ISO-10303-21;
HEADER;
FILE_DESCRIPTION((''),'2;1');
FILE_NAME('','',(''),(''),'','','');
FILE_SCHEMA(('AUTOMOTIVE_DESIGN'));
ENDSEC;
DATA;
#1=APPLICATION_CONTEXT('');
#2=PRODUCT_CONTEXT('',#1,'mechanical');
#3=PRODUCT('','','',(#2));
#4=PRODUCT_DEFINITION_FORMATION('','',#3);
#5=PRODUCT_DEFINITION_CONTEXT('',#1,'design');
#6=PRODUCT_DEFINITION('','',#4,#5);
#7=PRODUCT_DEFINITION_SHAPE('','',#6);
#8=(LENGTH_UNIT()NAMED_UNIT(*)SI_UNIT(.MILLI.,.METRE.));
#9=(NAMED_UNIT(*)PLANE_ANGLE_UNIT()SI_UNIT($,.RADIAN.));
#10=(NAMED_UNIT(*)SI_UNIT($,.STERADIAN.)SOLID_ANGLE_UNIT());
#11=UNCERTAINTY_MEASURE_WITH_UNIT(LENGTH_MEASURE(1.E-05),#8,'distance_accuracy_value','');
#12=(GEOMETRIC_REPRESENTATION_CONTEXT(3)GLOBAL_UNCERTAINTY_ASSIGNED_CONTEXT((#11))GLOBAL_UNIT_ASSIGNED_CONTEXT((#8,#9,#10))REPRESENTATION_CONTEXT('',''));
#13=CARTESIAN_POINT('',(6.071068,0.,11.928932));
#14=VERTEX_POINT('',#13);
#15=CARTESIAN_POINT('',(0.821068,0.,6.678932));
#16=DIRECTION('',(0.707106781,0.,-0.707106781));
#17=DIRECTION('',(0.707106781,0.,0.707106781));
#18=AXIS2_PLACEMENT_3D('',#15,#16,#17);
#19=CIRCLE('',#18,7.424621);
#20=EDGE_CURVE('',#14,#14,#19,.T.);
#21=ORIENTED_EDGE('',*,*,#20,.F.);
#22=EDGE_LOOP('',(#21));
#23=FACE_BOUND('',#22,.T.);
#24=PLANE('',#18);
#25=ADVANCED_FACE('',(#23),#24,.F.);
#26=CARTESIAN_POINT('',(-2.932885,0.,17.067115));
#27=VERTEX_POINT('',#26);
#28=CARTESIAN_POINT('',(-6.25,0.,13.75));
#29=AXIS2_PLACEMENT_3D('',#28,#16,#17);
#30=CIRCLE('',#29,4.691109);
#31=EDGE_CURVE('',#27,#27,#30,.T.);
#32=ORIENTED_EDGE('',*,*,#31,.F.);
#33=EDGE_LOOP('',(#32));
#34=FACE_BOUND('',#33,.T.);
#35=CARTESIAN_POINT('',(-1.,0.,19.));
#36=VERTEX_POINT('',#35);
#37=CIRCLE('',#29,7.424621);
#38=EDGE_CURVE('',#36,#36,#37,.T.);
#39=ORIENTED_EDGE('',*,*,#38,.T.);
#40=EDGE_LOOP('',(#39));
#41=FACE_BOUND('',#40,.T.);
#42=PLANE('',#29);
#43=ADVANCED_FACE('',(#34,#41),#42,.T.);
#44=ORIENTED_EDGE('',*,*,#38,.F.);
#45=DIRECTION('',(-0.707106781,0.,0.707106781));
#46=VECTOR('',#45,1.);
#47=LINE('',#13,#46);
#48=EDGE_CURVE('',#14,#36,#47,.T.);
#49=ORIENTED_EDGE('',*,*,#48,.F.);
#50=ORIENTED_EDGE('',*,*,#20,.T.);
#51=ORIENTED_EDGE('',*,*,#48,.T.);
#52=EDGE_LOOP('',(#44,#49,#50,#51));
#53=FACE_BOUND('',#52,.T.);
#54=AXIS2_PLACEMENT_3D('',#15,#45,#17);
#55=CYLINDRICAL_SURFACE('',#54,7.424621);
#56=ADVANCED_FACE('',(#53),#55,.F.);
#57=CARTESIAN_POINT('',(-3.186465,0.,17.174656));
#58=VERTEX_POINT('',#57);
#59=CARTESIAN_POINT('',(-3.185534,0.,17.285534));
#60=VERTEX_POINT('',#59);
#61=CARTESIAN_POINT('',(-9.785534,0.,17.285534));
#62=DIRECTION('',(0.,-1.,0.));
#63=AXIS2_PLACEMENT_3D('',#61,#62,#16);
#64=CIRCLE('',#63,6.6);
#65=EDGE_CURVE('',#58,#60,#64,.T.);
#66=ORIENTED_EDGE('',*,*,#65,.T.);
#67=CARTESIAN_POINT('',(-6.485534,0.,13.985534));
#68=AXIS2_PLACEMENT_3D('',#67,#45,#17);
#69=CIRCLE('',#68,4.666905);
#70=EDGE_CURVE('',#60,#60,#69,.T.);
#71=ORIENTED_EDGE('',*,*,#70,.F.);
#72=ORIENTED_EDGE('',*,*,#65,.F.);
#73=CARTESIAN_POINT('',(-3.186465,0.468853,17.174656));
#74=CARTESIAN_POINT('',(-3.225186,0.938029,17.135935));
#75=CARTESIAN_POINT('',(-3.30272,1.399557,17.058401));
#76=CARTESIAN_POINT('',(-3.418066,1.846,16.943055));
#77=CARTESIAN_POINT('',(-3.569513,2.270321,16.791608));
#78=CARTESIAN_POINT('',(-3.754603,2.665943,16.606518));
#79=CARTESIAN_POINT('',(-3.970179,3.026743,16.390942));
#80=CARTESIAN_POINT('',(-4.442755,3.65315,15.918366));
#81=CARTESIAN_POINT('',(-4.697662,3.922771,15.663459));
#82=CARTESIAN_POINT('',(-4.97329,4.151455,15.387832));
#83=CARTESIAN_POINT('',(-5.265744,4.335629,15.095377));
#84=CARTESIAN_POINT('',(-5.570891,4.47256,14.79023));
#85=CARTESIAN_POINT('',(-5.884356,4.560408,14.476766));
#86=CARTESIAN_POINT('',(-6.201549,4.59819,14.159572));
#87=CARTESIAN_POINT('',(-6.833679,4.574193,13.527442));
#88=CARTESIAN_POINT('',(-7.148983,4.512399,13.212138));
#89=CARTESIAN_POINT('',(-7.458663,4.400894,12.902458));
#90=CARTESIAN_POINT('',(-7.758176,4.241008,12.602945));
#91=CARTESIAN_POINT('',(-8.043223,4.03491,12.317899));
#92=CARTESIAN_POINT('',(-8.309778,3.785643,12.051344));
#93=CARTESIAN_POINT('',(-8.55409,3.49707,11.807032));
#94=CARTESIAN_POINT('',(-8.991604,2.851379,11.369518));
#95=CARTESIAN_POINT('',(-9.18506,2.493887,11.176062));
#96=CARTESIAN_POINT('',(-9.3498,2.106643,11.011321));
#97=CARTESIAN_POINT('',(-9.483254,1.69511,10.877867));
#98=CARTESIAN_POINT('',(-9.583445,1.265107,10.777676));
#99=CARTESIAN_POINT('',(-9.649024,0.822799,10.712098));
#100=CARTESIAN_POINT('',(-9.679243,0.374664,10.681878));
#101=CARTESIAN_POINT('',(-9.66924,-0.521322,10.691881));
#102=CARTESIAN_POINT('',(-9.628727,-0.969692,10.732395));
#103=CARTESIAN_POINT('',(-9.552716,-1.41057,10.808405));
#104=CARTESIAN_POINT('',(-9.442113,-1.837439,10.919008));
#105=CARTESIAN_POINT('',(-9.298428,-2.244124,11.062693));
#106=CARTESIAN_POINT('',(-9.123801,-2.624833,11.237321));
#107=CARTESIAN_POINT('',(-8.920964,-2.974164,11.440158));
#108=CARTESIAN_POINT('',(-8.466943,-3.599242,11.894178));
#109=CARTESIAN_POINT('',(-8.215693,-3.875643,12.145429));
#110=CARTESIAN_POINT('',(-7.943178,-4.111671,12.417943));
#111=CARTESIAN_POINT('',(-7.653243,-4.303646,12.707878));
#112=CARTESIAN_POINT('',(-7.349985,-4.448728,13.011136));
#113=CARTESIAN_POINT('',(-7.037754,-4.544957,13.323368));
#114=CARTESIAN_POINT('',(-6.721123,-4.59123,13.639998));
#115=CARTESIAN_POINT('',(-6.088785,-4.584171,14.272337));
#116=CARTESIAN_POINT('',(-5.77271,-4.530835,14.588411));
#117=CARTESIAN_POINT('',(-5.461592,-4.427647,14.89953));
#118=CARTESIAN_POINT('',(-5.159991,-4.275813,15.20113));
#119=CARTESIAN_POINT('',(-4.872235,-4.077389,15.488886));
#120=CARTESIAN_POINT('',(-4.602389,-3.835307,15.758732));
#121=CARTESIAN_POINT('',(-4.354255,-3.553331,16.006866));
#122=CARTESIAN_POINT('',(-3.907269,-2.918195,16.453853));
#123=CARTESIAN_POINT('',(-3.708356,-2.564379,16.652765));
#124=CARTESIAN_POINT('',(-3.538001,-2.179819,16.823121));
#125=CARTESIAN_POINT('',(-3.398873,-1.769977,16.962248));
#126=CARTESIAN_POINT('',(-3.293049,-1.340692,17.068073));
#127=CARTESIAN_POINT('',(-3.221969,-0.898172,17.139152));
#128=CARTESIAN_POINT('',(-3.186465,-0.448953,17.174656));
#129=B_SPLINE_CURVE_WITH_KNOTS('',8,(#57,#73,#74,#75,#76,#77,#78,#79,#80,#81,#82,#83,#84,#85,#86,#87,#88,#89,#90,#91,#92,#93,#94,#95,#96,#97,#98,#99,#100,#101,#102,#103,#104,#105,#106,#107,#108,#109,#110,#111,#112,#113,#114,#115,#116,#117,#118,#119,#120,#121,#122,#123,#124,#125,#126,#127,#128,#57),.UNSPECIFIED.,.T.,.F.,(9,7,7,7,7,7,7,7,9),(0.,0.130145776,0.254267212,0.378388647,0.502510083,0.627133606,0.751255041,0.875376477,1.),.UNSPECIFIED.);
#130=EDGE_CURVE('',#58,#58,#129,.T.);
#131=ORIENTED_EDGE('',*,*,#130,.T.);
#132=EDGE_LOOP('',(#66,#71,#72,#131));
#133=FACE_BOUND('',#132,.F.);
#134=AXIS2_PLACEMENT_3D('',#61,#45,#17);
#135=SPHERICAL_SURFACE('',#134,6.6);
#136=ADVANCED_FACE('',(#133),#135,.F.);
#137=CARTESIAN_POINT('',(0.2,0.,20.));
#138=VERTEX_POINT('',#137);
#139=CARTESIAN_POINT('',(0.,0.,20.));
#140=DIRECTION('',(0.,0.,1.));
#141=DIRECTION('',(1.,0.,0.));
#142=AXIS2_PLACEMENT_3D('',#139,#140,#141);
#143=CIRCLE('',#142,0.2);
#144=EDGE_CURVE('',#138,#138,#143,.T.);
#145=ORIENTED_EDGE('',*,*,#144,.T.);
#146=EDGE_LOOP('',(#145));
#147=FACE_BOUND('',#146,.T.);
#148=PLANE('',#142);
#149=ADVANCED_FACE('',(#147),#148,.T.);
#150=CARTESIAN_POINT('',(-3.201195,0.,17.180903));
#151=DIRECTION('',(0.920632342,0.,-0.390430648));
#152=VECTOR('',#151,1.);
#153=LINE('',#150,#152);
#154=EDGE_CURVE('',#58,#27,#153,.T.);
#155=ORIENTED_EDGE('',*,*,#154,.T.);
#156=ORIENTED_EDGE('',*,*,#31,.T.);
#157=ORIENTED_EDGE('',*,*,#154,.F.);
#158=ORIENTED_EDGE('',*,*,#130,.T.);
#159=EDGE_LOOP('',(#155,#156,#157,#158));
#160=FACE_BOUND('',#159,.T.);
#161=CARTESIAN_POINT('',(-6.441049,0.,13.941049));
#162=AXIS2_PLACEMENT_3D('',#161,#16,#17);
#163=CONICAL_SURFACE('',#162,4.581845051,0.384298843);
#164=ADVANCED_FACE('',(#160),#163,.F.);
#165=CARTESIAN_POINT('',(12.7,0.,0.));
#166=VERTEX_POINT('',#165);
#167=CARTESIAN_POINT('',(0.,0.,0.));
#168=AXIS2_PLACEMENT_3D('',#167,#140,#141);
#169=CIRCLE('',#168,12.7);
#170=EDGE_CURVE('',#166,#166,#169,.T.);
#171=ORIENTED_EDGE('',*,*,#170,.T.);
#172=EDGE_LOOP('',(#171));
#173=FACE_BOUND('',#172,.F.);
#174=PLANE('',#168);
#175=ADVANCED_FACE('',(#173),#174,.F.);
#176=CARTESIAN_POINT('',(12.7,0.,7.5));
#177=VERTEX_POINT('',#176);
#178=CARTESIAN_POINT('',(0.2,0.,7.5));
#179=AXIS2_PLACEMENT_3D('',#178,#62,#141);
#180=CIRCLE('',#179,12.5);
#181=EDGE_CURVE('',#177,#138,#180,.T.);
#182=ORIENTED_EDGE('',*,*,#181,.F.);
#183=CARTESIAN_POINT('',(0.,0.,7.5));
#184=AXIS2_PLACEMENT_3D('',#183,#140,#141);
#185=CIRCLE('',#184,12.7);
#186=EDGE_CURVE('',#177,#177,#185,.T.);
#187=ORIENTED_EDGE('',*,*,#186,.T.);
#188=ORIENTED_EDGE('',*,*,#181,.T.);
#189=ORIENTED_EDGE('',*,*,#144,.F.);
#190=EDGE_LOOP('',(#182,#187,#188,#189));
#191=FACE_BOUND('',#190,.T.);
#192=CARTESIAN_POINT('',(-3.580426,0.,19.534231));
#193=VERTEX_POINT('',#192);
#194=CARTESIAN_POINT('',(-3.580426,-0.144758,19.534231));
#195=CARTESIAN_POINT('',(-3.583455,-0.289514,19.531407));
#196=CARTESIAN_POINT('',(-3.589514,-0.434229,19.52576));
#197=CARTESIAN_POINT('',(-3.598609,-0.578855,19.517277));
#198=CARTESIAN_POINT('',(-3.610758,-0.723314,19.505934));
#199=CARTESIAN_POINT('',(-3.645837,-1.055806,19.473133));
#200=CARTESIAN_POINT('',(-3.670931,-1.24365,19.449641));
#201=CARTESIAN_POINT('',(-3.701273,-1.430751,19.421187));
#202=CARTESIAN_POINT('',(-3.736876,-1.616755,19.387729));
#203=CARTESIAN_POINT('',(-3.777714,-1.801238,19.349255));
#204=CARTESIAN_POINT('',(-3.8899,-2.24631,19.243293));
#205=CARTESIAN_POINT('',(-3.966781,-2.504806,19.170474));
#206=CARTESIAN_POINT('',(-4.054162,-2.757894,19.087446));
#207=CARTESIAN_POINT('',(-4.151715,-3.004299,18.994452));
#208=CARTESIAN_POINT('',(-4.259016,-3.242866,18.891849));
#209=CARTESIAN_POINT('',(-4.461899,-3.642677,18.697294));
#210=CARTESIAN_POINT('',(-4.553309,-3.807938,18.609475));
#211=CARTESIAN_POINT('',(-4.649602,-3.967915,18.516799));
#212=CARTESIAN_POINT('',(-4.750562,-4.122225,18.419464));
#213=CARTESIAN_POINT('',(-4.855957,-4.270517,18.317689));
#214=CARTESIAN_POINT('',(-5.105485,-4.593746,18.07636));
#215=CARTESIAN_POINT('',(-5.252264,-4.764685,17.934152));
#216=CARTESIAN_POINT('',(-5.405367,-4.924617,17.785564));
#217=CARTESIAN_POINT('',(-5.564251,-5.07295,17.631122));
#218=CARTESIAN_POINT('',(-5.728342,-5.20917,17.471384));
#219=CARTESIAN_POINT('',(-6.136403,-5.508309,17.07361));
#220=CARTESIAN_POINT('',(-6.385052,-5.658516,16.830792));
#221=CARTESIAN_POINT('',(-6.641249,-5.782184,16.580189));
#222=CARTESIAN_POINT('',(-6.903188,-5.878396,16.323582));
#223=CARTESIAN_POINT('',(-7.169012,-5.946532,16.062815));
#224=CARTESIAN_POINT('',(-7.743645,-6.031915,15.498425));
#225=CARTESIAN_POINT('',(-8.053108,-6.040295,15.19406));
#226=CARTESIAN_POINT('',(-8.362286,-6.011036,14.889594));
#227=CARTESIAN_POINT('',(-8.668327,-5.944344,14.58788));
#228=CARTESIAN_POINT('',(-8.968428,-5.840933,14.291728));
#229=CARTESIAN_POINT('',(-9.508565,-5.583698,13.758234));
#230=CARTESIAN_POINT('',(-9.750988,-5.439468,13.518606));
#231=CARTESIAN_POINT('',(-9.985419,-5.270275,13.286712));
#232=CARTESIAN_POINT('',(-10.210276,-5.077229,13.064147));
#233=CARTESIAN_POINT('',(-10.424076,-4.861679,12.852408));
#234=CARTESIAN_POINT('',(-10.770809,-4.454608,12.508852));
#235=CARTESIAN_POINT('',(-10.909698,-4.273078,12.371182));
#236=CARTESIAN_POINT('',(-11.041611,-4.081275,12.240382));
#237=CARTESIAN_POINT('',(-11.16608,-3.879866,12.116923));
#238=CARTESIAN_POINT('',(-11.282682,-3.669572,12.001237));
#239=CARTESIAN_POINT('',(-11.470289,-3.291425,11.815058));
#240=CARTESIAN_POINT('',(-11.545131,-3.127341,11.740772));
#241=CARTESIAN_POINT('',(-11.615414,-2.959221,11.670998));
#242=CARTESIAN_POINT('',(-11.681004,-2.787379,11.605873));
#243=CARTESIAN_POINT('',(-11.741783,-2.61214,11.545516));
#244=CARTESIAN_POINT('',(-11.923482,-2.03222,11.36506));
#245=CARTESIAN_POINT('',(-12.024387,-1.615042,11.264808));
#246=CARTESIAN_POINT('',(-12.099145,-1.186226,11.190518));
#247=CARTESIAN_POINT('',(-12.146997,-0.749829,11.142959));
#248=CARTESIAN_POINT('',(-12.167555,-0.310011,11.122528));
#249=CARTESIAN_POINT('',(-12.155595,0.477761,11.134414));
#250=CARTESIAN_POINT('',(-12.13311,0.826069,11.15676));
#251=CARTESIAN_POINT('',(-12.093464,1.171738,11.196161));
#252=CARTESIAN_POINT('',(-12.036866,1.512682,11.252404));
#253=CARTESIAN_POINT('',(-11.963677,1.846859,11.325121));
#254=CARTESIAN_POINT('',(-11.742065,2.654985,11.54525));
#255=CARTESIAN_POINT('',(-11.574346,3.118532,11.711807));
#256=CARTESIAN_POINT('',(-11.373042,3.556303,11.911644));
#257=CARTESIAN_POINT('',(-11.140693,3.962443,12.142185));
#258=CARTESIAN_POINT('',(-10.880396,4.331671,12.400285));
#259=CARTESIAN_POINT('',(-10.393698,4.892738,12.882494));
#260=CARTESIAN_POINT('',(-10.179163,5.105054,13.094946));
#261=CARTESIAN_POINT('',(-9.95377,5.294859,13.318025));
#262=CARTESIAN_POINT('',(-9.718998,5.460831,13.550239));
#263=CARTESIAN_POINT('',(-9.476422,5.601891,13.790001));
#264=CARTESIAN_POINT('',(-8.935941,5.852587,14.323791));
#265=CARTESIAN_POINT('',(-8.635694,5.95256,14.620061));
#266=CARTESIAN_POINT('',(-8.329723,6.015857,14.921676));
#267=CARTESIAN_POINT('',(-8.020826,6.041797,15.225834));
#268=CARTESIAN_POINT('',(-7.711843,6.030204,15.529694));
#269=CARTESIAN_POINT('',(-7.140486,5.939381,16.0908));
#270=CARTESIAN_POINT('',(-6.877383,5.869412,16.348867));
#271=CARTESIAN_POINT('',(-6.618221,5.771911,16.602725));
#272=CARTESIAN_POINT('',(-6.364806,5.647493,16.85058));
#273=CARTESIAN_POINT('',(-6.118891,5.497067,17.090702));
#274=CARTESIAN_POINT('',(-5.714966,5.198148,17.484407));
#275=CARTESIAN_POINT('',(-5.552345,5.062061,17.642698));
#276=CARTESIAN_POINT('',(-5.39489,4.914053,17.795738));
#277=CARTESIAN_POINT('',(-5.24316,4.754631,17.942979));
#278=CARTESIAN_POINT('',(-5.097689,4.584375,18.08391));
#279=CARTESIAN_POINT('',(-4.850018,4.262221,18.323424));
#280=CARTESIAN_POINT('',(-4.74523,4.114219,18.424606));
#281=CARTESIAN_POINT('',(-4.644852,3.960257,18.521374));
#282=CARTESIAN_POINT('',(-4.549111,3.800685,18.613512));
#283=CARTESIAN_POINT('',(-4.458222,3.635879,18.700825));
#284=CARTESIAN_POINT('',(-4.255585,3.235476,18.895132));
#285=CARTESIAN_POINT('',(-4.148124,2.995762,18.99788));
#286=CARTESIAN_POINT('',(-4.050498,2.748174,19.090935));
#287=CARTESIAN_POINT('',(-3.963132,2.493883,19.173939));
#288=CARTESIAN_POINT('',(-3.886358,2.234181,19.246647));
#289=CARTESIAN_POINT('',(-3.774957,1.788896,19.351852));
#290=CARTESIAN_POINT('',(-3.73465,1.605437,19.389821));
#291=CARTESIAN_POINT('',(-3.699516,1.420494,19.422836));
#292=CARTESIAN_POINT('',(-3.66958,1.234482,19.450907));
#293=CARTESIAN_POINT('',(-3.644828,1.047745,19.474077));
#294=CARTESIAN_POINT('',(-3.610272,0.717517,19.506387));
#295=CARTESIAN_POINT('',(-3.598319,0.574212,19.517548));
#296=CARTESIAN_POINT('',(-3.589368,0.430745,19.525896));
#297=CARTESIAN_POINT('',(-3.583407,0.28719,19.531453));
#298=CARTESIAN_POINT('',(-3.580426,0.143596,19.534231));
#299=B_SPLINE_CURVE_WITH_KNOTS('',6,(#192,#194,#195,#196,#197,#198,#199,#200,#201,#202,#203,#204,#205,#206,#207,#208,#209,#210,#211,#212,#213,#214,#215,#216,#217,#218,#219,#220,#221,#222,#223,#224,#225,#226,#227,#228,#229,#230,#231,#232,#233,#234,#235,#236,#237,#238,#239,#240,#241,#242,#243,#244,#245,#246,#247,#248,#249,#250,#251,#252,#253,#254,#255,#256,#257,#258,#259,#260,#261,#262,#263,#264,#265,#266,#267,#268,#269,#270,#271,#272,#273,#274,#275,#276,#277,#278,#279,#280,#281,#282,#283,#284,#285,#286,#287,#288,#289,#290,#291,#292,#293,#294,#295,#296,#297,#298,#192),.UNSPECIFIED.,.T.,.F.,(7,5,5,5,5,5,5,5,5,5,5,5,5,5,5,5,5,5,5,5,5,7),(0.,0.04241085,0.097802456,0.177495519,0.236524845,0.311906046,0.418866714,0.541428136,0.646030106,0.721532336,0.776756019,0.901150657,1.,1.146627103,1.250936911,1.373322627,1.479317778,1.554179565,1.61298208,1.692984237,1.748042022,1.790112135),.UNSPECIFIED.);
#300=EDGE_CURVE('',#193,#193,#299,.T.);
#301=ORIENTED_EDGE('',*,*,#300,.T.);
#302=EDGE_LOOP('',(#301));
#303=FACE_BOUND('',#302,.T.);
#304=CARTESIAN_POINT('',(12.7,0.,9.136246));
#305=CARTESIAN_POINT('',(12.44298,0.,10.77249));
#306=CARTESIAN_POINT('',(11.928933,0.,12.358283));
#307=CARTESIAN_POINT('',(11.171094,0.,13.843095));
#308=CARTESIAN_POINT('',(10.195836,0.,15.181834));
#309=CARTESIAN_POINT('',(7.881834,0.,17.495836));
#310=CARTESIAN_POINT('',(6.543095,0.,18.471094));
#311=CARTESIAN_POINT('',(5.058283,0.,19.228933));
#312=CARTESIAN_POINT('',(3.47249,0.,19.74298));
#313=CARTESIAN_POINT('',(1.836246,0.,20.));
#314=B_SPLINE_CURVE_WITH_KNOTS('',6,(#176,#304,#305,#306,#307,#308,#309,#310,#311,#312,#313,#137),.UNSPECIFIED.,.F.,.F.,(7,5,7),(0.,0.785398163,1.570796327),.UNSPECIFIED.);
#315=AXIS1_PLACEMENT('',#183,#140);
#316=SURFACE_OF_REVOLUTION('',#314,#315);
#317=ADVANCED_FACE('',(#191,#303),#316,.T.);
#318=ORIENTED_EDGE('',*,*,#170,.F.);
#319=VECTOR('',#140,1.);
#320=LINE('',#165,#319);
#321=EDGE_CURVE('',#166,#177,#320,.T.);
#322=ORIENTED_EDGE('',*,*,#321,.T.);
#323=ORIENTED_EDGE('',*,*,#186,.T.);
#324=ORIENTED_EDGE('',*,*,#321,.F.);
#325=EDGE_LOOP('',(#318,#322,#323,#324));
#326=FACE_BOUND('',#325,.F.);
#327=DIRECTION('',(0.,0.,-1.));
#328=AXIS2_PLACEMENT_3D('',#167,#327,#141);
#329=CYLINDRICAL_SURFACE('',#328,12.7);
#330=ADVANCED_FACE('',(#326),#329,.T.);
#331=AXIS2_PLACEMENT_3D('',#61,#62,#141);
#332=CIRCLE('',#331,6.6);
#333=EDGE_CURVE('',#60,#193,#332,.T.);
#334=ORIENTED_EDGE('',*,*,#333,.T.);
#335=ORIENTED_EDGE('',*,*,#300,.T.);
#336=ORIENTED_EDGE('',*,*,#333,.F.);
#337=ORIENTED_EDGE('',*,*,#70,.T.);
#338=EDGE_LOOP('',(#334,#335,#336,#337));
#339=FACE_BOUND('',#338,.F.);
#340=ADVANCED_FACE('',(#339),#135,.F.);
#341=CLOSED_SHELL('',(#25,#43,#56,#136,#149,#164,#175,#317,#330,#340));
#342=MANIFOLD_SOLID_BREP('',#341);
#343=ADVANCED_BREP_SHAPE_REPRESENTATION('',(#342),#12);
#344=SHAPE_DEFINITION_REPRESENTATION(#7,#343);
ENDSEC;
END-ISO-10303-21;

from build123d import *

# Parameters (mm, degrees)
F0_R     = 12.7
F1_DEPTH = 20
F2_R     = 12.5


# Not quite as in the source:
# - a fillet or chamfer that OpenCascade refuses, or shapes differently, is made with other operations: its cross-section is extruded or revolved along the edge and cut away or added


with BuildPart() as f1:
    # F0 (on Top) → F1 (new body)
    with BuildSketch(Plane.XY):
        Circle(F0_R)
    extrude(amount=F1_DEPTH)

    # F2
    f2_edges = [f1.edges().sort_by_distance(p)[0] for p in [
        (-12.7, 0, 20),
    ]]
    fillet(f2_edges, radius=F2_R)

    # F3 (on Front) → F4 (revolve, cut)
    with BuildSketch(Plane.XZ):
        Polygon((6.0710678119, 11.9289321881), (-1, 19), (-6.25, 13.75), (0.8210678119, 6.6789321881), align=None)
    revolve(axis=Axis((-2.7144660941, 0, 10.2144660941), (0.7071067812, 0, -0.7071067812)), mode=Mode.SUBTRACT)

    # F5 (on Front) → F6 (revolve, cut)
    with BuildSketch(Plane.XZ):
        with BuildLine():
            Line((-9.7855339059, 17.2855339059), (-5.1186291501, 12.6186291501))
            ThreePointArc((-5.1186291501, 12.6186291501), (-3.6879289914, 14.7598232523), (-3.1855339059, 17.2855339059))
            ThreePointArc((-3.1855339059, 17.2855339059), (-7.2598232523, 23.3831388205), (-14.4524386618, 21.9524386618))
            Line((-14.4524386618, 21.9524386618), (-9.7855339059, 17.2855339059))
        make_face()
    revolve(axis=Axis((-12.1189862838, 0, 19.6189862838), (-0.7071067812, 0, 0.7071067812)), mode=Mode.SUBTRACT)

    # F7: chamfer of 0.4 on 1 edges, made by hand

    # F7_s1 → F7_t2 (revolve, cut)
    with BuildSketch(Plane.XZ):
        with BuildLine():
            Line((-3.2011954465, 17.1809028584), (-2.9181547597, 17.0608682325))
            Line((-2.9181547597, 17.0608682325), (-2.9124979054, 17.0552113782))
            ThreePointArc((-2.9124979054, 17.0552113782), (-3.0605101564, 16.9281761351), (-3.1980339034, 16.7906523881))
            Line((-3.1980339034, 16.7906523881), (-3.2116687493, 16.7969022419))
            ThreePointArc((-3.2116687493, 16.7969022419), (-3.2002291645, 16.9885061916), (-3.2091943175, 17.1810372559))
            Line((-3.2091943175, 17.1810372559), (-3.2011954465, 17.1809028584))
        make_face()
    revolve(axis=Axis((-6.25, 0, 13.75), (-0.7071067812, 0, 0.7071067812)), mode=Mode.SUBTRACT)


solid = f1.part
